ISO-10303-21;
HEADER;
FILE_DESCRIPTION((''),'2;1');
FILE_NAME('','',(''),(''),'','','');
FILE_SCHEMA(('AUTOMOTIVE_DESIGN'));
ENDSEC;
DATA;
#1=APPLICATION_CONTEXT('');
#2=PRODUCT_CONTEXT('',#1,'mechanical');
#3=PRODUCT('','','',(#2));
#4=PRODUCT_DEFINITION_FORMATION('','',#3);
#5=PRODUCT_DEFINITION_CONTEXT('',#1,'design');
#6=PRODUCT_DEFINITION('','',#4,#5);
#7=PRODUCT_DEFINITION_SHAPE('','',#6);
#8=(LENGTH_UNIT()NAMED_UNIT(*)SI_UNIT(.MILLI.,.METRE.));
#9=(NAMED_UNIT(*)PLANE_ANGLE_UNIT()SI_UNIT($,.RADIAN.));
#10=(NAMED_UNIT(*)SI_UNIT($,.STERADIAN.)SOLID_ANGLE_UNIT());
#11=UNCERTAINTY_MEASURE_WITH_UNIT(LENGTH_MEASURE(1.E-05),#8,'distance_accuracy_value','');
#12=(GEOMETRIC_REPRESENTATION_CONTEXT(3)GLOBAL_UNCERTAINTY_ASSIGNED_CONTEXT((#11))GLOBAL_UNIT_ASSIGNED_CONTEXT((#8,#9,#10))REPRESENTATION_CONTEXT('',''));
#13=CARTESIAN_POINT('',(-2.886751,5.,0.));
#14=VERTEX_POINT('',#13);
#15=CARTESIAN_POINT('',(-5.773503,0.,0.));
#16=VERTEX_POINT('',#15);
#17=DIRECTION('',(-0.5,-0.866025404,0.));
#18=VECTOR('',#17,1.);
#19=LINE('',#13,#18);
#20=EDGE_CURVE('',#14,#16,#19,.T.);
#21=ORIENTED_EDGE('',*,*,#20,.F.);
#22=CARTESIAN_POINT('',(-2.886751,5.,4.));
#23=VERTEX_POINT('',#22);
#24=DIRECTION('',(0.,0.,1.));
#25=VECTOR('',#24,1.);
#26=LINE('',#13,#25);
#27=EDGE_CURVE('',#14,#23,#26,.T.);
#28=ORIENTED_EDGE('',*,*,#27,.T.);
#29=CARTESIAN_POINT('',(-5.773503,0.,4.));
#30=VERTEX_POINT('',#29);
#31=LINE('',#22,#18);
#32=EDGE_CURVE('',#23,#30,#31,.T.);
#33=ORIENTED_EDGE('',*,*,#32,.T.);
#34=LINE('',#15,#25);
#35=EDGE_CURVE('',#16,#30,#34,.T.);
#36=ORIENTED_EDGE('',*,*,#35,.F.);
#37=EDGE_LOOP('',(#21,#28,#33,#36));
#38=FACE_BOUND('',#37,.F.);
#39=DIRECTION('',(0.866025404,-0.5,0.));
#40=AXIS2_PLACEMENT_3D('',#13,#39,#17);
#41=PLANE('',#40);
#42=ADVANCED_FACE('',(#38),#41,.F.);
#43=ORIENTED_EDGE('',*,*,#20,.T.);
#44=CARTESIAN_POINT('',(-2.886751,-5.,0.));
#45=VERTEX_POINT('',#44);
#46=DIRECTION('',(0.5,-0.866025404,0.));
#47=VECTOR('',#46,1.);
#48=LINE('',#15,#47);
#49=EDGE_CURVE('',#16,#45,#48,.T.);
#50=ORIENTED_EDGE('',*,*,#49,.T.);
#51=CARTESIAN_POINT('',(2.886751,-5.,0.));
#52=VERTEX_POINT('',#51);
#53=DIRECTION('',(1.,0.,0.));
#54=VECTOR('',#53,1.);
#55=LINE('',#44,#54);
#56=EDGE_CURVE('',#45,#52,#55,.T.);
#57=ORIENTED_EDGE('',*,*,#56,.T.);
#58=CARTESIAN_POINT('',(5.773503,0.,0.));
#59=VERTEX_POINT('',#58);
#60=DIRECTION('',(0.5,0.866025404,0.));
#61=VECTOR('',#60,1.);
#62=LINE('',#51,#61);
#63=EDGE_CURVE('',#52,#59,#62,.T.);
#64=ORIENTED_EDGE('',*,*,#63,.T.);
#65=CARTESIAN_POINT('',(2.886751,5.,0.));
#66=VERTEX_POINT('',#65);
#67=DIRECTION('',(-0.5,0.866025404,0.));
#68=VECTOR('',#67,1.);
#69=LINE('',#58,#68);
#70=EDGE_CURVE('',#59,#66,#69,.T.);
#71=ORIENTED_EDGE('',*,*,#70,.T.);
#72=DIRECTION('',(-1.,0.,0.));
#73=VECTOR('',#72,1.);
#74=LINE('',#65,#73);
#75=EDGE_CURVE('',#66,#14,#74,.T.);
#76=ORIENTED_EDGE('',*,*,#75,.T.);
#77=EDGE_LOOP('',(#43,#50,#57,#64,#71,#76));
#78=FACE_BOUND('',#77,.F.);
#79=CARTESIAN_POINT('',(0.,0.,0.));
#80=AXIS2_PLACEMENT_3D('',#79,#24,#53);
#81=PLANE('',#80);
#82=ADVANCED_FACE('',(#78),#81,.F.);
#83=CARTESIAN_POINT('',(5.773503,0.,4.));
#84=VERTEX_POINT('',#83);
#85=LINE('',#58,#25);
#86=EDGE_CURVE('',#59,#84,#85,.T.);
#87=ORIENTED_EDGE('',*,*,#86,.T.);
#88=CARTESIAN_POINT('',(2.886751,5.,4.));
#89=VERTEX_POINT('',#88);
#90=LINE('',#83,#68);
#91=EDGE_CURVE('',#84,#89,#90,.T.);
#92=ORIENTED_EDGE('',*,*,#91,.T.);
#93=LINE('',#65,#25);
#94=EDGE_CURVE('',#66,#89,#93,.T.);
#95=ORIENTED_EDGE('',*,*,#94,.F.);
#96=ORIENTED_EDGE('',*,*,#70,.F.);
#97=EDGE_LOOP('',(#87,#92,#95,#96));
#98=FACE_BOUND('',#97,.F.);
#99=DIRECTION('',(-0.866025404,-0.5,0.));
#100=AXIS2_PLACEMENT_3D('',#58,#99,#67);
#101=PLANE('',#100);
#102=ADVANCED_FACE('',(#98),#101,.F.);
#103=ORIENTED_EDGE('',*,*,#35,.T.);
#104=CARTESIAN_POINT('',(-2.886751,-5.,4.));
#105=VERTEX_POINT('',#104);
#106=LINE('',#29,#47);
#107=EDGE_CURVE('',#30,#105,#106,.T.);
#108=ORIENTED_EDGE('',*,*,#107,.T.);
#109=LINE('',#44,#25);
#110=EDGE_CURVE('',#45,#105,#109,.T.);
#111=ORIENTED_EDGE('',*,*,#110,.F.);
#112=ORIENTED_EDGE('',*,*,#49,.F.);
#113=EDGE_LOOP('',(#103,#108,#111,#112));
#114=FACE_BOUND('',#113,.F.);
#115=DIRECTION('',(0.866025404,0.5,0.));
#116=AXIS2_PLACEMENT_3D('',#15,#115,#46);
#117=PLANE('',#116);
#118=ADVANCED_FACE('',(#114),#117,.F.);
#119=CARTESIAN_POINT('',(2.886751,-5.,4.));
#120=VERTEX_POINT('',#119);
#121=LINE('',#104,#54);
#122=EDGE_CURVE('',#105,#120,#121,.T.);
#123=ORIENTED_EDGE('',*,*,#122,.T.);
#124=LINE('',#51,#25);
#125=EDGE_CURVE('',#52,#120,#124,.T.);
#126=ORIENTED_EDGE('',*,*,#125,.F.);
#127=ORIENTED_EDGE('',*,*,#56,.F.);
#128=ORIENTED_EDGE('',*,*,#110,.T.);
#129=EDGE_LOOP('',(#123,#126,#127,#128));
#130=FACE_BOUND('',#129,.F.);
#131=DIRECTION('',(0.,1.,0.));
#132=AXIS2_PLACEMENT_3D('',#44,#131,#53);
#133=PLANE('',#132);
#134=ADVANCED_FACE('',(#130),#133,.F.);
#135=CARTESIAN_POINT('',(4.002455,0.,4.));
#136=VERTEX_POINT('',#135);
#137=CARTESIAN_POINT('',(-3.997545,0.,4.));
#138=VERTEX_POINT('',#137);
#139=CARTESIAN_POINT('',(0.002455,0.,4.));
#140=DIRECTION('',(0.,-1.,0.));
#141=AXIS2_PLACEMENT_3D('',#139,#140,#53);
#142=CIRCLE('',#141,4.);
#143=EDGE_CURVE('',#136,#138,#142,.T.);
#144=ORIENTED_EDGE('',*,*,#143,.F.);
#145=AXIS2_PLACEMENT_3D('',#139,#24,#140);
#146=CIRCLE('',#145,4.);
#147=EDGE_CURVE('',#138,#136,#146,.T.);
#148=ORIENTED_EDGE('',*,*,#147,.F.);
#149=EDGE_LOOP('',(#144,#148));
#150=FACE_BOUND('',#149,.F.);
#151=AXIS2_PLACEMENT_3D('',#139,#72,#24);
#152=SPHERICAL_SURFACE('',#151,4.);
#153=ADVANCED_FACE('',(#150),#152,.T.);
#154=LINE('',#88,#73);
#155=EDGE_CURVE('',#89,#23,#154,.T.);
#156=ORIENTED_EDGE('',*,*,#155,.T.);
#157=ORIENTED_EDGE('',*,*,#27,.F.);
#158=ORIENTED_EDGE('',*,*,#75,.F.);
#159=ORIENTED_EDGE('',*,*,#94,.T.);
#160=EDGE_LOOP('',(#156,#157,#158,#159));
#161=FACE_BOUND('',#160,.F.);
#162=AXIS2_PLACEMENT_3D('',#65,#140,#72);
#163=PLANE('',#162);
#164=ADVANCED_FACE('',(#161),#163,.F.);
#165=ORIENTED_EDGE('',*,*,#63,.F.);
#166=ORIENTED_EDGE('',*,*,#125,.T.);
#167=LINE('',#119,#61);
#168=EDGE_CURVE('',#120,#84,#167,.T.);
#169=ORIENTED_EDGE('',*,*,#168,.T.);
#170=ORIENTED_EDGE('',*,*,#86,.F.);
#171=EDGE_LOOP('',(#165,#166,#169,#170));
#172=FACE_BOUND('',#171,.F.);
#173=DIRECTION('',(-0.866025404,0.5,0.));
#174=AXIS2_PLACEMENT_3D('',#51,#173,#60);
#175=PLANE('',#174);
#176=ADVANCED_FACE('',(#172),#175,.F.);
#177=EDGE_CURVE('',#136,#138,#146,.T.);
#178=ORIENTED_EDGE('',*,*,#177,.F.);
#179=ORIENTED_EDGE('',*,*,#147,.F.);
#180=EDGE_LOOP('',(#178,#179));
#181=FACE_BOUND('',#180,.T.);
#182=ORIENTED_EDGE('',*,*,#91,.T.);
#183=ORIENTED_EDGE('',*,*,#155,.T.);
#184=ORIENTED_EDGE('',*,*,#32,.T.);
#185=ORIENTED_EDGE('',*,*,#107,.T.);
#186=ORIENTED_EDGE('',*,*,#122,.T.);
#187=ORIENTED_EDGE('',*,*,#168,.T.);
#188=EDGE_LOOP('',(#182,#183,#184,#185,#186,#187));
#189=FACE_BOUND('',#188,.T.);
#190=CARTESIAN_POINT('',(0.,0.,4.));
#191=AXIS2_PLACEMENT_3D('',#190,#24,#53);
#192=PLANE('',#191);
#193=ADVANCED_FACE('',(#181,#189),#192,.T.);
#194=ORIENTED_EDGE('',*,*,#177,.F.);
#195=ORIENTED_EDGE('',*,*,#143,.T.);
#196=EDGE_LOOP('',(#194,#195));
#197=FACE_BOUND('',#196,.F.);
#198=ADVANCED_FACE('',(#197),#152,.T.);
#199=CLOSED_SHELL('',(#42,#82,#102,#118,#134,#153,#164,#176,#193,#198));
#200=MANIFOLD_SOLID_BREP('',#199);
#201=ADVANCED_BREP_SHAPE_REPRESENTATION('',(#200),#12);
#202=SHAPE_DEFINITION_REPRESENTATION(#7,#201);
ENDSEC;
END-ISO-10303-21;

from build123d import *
from build123d import SkipClean  # not in build123d's __all__

# Parameters (mm, degrees)
F1_DEPTH = 4


with BuildPart() as f1:
    # F0 (on Top) → F1 (new body)
    with BuildSketch(Plane.XY):
        Polygon((2.8867513459, 5), (-2.8867513459, 5), (-5.7735026919, 0), (-2.8867513459, -5), (2.8867513459, -5), (5.7735026919, 0), align=None)
    extrude(amount=F1_DEPTH)

    # F2 (on Front) → F3 (revolve)
    with BuildSketch(Plane.XZ):
        with BuildLine():
            Line((-3.9975453725, 4), (4.0024546275, 4))
            ThreePointArc((4.0024546275, 4), (0.0024546275, 8), (-3.9975453725, 4))
        make_face()
    with SkipClean():  # cleaning this boolean's faces spoils the solid; the shape is the same uncleaned
        revolve(axis=Axis((0.0024546275, 0, 4), (1, 0, 0)))


solid = f1.part
